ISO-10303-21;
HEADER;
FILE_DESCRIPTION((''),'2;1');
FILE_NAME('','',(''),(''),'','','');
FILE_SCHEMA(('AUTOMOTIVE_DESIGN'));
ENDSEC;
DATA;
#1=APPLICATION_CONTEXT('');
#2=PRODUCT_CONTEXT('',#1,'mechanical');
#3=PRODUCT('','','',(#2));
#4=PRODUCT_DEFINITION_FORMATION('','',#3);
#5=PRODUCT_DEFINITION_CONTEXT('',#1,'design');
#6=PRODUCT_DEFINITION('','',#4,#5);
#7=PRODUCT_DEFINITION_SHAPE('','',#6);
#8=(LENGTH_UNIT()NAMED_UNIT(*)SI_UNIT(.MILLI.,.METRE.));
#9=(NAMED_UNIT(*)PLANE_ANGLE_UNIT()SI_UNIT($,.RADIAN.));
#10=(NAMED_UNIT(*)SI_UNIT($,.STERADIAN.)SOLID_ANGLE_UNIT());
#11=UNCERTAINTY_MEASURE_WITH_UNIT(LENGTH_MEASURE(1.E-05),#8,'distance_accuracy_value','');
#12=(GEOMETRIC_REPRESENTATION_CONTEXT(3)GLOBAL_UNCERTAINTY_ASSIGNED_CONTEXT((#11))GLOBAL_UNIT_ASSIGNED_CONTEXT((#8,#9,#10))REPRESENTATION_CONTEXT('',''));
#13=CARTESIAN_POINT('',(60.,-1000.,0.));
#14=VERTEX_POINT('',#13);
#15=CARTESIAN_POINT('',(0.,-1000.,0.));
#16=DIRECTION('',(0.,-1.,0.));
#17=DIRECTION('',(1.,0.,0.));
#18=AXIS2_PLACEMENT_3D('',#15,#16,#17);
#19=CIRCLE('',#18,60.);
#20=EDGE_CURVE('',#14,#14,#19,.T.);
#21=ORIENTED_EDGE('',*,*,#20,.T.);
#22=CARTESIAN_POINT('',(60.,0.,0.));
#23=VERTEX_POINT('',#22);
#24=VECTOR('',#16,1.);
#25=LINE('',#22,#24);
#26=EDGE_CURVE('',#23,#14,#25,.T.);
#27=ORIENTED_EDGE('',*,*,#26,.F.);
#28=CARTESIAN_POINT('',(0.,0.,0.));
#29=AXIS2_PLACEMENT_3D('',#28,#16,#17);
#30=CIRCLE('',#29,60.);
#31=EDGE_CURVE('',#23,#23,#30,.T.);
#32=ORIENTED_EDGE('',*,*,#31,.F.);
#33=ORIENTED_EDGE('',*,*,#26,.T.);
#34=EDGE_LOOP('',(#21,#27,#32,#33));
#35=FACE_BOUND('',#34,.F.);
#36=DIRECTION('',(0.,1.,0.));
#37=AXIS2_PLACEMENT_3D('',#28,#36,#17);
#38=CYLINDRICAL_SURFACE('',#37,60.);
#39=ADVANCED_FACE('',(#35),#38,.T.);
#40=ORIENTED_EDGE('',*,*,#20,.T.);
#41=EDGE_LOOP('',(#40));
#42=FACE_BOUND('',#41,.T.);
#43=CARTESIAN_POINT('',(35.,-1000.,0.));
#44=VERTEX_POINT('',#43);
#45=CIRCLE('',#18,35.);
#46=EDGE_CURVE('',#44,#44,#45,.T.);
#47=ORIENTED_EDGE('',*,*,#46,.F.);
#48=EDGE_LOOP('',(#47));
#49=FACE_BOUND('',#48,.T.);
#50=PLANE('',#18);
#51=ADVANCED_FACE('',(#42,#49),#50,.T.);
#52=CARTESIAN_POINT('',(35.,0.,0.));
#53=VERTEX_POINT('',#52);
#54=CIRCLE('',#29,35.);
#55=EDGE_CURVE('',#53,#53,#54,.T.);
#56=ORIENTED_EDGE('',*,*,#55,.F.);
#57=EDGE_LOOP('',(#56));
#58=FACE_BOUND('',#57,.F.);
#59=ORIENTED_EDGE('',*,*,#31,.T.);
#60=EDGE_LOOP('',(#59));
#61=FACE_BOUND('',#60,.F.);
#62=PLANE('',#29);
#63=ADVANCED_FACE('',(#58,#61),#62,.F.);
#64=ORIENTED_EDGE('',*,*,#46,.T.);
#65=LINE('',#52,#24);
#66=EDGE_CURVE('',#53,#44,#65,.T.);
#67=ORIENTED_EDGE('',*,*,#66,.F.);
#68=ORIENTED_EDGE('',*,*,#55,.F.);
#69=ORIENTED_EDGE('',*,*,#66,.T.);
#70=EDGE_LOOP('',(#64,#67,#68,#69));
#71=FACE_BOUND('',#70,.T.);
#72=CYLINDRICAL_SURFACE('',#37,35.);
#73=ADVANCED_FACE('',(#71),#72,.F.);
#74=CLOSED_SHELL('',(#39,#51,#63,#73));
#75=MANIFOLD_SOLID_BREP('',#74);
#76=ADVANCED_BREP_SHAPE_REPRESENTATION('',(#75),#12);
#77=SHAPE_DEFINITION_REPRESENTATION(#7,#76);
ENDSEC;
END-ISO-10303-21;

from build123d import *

# Parameters (mm, degrees)
F0_R     = 60
F0_R_2   = 35
F1_DEPTH = 1000


# Not quite as in the source:
# - a feature of the source that left no trace in its solid (it failed there, or was rolled back) is left out
# - the program builds the solid bodies; features that only make, move or delete a surface that nothing else refers to are left out


with BuildPart() as f1:
    # F0 (on Front) → F1 (new body)
    with BuildSketch(Plane.XZ):
        Circle(F0_R)
        Circle(F0_R_2, mode=Mode.SUBTRACT)
    extrude(amount=F1_DEPTH)


solid = f1.part
